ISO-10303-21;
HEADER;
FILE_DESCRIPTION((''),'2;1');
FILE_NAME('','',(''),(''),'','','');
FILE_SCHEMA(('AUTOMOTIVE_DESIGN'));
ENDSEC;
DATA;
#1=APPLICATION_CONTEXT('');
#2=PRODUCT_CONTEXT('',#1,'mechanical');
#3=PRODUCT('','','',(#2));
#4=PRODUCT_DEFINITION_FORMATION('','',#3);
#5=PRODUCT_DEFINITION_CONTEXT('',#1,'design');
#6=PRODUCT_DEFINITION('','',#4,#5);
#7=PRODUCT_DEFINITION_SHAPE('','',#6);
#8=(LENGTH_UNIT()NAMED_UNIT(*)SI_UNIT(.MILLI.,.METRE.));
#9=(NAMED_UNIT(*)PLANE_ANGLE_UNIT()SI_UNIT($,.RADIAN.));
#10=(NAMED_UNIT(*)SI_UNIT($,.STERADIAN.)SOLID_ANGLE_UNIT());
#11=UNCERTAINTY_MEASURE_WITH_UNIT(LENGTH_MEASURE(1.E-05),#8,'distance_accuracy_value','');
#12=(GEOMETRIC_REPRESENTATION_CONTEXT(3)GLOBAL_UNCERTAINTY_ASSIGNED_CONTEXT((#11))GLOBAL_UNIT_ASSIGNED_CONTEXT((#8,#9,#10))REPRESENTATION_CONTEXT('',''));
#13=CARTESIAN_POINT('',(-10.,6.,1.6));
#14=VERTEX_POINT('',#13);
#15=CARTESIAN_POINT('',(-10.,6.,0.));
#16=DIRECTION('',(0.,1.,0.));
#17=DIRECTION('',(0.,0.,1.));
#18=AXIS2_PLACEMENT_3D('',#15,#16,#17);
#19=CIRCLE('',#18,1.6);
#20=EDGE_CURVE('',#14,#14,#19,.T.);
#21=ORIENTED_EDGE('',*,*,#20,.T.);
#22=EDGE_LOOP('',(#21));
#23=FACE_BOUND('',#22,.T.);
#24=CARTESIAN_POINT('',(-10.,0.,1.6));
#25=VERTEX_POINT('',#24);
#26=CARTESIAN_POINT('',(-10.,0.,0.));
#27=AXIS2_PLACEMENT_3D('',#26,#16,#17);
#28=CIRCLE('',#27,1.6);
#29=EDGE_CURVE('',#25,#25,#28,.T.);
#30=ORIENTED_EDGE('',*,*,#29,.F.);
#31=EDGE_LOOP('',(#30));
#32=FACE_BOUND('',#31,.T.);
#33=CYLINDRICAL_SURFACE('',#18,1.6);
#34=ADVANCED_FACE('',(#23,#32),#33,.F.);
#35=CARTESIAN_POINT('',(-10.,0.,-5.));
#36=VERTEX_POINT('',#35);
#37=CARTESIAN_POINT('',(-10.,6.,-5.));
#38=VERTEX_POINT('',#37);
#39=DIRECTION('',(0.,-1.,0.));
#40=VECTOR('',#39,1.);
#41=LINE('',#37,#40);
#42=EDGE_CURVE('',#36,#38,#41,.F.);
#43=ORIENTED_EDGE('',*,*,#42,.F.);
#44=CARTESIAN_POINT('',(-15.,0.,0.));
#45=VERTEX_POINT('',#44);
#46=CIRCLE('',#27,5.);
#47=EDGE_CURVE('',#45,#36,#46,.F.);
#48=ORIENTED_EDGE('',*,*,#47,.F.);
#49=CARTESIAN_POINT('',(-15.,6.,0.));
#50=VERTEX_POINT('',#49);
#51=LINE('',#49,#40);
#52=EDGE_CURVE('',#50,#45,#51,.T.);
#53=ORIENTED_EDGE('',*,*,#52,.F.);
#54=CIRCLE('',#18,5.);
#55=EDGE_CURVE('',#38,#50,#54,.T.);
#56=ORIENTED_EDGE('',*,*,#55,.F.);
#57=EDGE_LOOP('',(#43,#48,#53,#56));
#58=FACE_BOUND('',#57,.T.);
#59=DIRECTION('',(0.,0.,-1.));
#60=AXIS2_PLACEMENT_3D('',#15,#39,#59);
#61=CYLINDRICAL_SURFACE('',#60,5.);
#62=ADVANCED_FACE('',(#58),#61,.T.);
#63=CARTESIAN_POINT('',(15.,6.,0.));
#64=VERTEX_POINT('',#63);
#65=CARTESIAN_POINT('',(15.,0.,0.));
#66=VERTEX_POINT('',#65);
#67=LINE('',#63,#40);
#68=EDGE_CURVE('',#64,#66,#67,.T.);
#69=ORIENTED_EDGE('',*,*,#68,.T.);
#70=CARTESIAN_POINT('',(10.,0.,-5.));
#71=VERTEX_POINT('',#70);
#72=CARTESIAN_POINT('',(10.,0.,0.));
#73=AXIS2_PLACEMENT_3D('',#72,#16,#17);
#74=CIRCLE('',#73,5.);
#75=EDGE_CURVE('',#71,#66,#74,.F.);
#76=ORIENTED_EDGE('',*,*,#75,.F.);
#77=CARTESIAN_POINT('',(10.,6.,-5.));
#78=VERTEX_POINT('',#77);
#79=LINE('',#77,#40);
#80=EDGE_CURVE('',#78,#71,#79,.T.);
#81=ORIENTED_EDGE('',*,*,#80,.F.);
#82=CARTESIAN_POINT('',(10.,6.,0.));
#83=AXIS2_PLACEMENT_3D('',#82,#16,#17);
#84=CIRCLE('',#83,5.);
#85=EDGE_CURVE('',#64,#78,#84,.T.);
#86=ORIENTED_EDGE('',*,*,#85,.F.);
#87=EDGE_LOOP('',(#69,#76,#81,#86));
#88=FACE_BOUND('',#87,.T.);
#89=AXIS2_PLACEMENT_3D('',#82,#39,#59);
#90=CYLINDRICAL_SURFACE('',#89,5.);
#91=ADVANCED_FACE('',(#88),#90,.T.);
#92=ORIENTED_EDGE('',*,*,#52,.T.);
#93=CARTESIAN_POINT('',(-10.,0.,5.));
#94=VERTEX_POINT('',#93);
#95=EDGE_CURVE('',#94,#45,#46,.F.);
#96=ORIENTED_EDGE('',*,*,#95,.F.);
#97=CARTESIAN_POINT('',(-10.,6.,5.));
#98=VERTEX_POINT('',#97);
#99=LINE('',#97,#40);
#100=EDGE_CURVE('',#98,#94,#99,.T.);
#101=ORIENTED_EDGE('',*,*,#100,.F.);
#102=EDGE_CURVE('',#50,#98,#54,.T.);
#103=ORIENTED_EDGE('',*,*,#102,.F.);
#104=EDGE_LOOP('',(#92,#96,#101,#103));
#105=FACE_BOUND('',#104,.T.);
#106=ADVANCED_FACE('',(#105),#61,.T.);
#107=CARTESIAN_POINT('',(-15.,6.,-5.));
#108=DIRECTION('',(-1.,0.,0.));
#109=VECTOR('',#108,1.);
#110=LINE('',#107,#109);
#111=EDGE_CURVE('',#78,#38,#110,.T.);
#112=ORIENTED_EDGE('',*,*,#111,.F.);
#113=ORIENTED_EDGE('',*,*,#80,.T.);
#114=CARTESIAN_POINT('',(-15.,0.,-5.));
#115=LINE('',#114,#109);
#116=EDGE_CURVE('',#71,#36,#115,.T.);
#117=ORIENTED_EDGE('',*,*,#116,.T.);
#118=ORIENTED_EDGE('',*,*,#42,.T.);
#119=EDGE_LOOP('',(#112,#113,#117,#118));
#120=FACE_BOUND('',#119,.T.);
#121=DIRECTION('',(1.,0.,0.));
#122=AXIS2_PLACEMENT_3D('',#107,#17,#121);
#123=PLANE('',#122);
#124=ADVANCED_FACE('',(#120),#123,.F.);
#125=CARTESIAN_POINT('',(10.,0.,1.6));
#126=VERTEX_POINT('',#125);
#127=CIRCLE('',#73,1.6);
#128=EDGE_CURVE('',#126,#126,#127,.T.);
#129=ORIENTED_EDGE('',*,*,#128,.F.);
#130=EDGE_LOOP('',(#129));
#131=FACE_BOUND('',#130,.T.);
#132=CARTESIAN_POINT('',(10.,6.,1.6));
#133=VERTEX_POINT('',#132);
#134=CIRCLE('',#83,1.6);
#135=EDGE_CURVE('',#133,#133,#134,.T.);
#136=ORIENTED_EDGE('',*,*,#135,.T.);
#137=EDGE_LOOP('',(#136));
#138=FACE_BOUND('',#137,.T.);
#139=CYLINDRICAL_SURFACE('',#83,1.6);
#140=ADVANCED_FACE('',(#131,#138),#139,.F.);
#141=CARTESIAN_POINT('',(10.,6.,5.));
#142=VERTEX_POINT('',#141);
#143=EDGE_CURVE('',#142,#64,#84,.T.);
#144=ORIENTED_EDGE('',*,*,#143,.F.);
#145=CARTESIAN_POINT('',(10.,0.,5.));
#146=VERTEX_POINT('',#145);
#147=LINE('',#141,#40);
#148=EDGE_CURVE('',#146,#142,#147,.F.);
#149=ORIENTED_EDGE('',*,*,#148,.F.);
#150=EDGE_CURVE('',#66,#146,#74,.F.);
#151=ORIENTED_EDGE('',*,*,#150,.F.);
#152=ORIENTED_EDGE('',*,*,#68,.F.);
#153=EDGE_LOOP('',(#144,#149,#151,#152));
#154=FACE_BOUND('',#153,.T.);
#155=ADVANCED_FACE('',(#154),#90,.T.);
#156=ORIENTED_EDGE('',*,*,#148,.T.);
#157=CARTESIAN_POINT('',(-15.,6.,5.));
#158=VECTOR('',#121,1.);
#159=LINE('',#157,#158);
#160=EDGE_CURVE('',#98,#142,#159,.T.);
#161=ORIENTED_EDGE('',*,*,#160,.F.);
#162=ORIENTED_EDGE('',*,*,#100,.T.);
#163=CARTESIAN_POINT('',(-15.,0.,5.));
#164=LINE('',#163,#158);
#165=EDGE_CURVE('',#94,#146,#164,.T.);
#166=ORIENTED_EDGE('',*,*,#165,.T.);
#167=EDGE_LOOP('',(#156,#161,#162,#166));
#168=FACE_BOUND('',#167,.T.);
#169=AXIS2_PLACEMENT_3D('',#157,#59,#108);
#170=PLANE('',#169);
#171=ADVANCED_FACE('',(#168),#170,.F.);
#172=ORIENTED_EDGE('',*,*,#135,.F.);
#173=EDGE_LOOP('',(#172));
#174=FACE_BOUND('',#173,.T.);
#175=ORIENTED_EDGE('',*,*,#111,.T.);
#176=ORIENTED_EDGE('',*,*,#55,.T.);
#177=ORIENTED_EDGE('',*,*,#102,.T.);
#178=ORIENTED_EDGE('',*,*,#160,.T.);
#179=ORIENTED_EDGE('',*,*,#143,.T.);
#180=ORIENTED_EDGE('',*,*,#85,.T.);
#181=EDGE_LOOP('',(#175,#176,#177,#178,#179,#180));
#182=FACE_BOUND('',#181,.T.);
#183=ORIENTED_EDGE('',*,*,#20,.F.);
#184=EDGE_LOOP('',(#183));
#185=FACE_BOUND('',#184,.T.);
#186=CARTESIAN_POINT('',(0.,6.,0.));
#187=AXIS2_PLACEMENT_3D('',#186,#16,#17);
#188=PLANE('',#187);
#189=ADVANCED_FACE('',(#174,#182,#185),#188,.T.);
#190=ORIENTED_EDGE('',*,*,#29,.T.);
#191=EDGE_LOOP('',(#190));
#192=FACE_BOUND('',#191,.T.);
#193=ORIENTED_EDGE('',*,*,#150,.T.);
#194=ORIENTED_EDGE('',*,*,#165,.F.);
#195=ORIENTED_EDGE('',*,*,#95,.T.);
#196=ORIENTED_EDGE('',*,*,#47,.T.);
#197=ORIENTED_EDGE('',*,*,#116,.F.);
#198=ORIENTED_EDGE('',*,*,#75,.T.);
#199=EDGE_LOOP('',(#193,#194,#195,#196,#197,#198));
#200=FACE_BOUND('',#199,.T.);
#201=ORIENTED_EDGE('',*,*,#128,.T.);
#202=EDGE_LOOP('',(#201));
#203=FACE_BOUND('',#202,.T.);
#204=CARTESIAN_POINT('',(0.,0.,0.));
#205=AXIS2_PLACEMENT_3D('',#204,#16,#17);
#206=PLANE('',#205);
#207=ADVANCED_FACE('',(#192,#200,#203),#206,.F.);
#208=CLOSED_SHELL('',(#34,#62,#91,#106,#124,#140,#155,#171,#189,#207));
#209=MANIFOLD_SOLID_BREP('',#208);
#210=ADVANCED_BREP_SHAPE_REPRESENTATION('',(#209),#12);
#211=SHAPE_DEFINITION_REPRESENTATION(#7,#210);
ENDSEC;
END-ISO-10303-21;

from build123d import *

# Parameters (mm, degrees)
SKETCH2_W            = 30
SKETCH2_H            = 10
BOSS_EXTRUDE1_DEPTH  = 6
M3_CLEARANCE_HOLE1_D = 3.2
FILLET1_R            = 5


with BuildPart() as part:
    # Sketch2 → Boss-Extrude1 (new body)
    with BuildSketch(Plane(origin=(0, 0, 0), x_dir=(1, 0, 0), z_dir=(0, 1, 0))):
        Rectangle(SKETCH2_W, SKETCH2_H)
    extrude(amount=BOSS_EXTRUDE1_DEPTH)

    # M3 Clearance Hole1 (through all)
    with Locations(Plane(origin=(0, 6, 0), x_dir=(1, 0, 0), z_dir=(0, 1, 0))):
        with Locations((-10, 0), (10, 0)):
            Hole(M3_CLEARANCE_HOLE1_D / 2)

    # Fillet1
    fillet1_edges = [part.edges().sort_by_distance(p)[0] for p in [
        (15, 3, -5),
        (15, 3, 5),
        (-15, 3, 5),
        (-15, 3, -5),
    ]]
    fillet(fillet1_edges, radius=FILLET1_R - 0.0001)  # a hair under: the kernel refuses the full size


solid = part.part
